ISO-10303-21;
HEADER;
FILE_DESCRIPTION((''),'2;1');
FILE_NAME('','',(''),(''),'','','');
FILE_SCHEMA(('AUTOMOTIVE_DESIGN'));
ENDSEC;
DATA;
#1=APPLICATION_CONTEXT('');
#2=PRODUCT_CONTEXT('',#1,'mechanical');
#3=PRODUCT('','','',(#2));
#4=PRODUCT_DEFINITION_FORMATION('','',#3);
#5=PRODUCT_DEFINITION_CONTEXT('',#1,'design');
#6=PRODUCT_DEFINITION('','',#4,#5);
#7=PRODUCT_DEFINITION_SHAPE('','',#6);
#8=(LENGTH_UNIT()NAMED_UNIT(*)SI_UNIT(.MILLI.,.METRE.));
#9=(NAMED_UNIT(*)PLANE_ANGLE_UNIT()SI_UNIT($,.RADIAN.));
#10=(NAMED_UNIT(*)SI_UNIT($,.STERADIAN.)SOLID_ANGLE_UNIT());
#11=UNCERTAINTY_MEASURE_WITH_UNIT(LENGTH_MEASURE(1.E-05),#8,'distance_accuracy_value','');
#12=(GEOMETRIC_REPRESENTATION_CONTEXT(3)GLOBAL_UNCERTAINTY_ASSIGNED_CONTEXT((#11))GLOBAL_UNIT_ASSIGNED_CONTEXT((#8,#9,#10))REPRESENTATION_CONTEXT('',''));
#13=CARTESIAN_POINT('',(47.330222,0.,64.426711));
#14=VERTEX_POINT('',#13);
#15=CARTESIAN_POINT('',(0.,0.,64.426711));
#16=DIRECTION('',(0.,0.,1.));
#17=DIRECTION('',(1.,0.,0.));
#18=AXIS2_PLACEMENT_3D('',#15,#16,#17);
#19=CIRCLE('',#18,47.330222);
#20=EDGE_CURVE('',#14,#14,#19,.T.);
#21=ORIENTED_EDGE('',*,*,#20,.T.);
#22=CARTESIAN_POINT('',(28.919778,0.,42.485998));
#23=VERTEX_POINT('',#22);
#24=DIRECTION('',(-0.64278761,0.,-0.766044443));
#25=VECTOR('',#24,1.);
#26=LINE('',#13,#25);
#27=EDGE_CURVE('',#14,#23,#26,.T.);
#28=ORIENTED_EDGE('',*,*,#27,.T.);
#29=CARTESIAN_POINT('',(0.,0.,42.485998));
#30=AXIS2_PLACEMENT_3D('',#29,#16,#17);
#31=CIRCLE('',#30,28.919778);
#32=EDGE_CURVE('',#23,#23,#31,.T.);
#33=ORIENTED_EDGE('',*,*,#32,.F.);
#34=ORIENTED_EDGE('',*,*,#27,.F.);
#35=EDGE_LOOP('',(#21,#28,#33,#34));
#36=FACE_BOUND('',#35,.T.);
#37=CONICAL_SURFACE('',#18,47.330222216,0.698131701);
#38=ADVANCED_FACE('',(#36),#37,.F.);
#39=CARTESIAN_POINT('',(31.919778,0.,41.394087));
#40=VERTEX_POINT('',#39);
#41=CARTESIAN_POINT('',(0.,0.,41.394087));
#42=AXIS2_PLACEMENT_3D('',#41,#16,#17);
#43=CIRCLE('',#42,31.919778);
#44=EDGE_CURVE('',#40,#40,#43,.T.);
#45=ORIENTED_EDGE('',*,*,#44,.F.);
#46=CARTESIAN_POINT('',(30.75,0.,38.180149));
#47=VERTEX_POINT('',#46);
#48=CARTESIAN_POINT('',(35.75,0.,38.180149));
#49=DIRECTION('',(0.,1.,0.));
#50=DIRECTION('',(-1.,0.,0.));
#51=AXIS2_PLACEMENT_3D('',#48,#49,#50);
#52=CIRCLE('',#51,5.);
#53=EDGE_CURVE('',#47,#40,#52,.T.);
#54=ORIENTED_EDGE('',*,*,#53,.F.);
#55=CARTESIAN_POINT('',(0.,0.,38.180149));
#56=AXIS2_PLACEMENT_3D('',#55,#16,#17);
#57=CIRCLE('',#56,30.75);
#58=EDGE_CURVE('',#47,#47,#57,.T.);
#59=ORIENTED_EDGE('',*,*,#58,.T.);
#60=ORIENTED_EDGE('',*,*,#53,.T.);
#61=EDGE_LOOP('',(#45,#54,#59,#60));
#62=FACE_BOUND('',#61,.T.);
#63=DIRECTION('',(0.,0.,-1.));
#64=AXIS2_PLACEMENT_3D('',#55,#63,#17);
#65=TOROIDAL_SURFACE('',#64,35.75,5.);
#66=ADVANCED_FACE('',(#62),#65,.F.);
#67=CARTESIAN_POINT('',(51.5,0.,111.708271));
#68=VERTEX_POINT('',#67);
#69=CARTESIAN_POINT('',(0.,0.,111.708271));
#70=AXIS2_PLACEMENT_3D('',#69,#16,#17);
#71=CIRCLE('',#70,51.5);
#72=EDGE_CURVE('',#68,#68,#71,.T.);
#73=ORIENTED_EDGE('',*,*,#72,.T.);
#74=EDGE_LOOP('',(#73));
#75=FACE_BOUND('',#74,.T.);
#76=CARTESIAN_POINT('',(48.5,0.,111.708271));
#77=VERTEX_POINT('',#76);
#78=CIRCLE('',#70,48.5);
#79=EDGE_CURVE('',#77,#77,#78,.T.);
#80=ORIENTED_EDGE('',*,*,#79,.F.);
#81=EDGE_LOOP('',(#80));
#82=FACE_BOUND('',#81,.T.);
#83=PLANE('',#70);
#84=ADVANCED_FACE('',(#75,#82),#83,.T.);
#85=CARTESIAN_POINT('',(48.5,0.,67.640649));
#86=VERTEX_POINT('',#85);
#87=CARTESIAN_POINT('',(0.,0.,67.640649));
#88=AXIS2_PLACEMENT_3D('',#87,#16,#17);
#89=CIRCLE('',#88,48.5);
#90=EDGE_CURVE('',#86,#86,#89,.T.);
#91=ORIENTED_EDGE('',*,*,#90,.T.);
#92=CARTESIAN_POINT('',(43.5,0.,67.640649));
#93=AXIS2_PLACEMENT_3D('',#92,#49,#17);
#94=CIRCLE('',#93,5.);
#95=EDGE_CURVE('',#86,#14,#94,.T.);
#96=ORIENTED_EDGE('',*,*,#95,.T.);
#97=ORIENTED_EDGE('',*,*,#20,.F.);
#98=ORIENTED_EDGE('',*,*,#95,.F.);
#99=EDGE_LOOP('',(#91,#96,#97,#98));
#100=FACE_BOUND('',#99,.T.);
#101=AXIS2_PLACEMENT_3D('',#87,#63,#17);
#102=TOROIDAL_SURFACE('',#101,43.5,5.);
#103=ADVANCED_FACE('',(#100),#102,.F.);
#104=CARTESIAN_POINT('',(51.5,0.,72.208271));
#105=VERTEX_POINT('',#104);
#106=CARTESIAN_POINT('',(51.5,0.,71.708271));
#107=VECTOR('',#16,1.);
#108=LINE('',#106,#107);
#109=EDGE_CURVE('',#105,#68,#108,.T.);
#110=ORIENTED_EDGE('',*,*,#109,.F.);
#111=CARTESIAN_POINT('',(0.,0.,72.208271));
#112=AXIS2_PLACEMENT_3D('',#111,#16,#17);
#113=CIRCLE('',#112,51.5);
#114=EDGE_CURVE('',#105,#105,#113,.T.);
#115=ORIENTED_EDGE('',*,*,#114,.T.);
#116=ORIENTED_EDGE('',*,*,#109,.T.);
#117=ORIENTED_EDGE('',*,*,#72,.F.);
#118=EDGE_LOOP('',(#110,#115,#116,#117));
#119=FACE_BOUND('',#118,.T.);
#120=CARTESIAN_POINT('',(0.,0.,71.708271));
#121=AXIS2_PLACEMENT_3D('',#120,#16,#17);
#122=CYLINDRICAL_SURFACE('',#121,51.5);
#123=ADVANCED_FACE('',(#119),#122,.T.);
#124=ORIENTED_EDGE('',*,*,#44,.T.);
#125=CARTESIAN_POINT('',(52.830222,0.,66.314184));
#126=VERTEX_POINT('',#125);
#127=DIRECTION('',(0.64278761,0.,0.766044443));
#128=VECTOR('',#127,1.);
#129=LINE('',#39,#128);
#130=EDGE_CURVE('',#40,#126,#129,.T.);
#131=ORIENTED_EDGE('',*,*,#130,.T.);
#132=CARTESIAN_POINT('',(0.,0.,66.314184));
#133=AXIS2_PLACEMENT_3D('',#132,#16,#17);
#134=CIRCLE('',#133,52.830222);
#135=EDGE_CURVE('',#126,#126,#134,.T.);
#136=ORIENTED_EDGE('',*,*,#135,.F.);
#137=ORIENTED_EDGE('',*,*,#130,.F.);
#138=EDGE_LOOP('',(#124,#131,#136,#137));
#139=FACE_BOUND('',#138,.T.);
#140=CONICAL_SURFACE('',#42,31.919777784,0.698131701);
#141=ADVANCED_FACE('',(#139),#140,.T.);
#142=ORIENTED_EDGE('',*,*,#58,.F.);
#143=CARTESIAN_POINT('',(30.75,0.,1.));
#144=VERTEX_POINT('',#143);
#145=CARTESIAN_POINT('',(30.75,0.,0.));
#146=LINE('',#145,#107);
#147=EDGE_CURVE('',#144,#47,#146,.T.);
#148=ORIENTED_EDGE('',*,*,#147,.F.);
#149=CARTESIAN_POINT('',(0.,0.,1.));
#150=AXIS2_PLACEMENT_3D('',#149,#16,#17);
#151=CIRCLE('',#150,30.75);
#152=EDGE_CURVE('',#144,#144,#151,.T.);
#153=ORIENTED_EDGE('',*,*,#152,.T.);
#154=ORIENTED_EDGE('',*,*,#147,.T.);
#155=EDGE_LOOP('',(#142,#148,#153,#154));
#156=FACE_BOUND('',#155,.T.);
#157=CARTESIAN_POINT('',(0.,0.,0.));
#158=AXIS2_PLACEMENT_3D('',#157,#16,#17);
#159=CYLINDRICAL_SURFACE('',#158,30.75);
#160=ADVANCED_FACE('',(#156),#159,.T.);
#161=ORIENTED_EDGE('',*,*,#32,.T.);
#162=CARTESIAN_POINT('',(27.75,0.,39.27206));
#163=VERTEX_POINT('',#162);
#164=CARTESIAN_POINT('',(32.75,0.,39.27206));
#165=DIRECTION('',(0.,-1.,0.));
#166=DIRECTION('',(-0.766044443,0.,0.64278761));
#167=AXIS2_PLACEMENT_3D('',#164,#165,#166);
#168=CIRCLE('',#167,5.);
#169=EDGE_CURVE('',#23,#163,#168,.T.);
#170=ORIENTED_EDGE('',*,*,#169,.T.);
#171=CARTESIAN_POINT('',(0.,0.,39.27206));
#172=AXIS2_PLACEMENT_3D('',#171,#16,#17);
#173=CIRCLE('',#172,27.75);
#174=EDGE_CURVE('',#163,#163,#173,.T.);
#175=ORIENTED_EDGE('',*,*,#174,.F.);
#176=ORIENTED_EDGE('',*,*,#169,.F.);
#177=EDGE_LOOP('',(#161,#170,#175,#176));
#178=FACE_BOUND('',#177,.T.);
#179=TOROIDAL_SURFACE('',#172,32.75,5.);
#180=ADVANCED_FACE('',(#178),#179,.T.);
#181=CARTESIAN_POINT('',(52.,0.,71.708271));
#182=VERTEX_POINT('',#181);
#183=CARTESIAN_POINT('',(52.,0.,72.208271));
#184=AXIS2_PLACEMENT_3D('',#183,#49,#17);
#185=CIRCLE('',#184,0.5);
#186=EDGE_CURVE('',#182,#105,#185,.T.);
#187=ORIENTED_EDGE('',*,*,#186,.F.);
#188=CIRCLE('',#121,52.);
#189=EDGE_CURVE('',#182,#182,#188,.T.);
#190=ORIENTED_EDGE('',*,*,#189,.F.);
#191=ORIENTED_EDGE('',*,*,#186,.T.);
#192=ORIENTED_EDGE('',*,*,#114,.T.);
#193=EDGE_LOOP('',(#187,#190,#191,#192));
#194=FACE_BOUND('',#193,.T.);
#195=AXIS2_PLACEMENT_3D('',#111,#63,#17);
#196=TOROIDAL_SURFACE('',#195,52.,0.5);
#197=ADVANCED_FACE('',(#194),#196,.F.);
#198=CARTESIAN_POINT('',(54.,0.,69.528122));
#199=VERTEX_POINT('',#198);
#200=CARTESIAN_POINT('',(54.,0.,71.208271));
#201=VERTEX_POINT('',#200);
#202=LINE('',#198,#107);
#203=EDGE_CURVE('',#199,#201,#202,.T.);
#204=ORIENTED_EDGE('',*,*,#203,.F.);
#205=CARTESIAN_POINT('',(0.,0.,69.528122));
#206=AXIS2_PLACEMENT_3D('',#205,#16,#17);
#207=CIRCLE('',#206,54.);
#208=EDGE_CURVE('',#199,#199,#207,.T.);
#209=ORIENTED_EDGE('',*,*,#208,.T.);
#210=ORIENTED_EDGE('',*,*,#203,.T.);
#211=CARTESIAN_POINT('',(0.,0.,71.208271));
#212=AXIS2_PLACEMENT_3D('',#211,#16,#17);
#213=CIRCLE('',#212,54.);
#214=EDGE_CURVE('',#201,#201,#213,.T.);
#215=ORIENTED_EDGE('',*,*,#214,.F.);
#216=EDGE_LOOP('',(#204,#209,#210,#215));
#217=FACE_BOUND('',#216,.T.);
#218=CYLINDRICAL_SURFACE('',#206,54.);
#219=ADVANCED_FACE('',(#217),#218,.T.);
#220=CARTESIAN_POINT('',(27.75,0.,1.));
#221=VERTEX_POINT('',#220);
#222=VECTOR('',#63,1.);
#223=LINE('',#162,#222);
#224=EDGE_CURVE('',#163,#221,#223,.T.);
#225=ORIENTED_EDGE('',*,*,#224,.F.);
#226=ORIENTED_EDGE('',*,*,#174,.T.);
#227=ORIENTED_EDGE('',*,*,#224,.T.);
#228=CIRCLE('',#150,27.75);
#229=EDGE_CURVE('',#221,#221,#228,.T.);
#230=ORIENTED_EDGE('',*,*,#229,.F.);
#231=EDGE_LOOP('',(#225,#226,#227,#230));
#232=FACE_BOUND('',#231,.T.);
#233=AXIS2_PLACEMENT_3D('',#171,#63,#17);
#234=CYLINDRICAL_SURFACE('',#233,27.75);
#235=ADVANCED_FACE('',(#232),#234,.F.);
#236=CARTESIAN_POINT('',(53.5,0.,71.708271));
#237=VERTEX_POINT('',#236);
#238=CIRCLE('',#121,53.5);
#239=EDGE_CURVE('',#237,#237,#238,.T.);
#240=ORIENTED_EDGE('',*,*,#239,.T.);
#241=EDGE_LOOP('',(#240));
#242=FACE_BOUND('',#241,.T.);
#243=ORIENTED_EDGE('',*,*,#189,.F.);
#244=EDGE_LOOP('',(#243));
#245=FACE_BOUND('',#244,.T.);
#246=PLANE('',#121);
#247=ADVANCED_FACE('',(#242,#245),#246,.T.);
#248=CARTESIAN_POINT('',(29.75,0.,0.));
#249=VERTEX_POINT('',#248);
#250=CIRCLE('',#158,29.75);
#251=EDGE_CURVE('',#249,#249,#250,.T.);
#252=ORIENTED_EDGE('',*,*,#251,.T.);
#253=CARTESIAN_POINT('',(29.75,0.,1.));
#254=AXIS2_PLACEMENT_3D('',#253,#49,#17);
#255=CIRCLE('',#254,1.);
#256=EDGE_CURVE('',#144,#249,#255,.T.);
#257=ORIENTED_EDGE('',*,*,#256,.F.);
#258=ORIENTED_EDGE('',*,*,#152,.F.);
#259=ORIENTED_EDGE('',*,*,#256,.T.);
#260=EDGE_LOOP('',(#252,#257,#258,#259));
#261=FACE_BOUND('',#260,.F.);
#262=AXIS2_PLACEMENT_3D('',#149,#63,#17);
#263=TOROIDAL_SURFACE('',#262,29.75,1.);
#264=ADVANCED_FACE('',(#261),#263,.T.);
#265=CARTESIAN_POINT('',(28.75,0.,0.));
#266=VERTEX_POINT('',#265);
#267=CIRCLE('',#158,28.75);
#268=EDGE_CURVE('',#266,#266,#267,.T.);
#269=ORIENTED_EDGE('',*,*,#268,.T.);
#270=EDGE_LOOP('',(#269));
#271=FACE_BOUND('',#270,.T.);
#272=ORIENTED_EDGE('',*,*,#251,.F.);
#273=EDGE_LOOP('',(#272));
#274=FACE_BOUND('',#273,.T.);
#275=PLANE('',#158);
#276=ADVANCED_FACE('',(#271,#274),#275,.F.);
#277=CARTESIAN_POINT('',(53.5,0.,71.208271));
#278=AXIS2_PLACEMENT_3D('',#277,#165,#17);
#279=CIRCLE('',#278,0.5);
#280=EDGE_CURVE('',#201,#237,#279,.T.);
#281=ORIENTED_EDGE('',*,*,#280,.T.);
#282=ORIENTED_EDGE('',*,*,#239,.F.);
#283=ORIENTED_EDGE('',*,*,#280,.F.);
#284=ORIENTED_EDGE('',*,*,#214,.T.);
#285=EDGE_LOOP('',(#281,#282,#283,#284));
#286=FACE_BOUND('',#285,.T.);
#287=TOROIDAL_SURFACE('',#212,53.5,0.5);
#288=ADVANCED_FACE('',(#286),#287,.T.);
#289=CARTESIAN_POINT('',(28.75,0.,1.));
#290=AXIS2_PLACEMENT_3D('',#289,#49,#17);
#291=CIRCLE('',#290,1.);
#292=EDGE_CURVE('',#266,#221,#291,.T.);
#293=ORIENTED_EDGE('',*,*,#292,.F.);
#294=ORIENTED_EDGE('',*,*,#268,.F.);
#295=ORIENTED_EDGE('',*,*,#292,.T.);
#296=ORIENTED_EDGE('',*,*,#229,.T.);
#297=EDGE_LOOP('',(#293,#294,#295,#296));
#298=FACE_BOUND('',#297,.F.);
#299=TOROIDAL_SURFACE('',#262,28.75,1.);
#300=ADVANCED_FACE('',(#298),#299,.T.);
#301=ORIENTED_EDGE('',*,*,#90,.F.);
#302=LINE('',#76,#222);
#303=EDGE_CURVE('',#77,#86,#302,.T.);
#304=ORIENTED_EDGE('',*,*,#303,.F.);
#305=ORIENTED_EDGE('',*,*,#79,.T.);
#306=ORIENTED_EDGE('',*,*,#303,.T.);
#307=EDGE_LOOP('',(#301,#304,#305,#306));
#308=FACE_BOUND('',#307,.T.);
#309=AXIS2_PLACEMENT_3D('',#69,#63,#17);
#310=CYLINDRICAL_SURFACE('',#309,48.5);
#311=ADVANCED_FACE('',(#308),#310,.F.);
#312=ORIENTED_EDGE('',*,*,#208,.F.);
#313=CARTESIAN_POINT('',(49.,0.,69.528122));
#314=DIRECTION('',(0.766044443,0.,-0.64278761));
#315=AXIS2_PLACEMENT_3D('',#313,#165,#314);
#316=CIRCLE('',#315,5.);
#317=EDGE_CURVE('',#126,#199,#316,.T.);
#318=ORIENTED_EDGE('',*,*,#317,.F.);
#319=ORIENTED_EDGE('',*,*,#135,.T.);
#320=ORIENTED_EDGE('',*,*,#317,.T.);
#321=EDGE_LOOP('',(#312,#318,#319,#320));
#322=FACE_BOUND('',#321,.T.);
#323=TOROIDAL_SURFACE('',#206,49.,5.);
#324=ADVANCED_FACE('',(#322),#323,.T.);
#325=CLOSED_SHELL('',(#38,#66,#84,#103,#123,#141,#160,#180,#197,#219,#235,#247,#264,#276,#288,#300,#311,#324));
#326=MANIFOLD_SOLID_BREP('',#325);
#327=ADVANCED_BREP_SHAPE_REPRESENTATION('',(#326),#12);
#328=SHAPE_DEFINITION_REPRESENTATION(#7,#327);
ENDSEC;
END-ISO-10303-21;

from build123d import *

# Parameters (mm, degrees)
F2_R = 0.5
F3_R = 1


# Not quite as in the source:
# - a feature names something its author has since deleted; it is built from what else it names


with BuildPart() as f1:
    # F0 (on Front) → F1 (revolve)
    with BuildSketch(Plane.XZ):
        with BuildLine():
            Line((27.75, 0), (30.75, 0))
            Line((30.75, 0), (30.75, 38.1801488287))
            ThreePointArc((30.75, 38.1801488287), (31.0515368961, 39.8902495453), (31.9197777844, 41.3940868771))
            Line((31.9197777844, 41.3940868771), (52.8302222156, 66.3141841507))
            ThreePointArc((52.8302222156, 66.3141841507), (53.6984631039, 67.8180214825), (54, 69.5281221991))
            Line((54, 69.5281221991), (54, 71.7082710278))
            Line((54, 71.7082710278), (51.5, 71.7082710278))
            Line((51.5, 71.7082710278), (51.5, 111.7082710278))
            Line((51.5, 111.7082710278), (48.5, 111.7082710278))
            Line((48.5, 111.7082710278), (48.5, 67.6406489205))
            ThreePointArc((48.5, 67.6406489205), (48.1984631039, 65.9305482038), (47.3302222156, 64.426710872))
            Line((47.3302222156, 64.426710872), (28.9197777844, 42.4859975799))
            ThreePointArc((28.9197777844, 42.4859975799), (28.0515368961, 40.9821602481), (27.75, 39.2720595315))
            Line((27.75, 39.2720595315), (27.75, 0))
        make_face()
    revolve(axis=Axis((0, 0, 46.6845482588), (0, 0, 1)))

    # F2
    f2_edges = [f1.edges().sort_by_distance(p)[0] for p in [
        (-54, 0, 71.708271),
        (-51.5, 0, 71.708271),
    ]]
    fillet(f2_edges, radius=F2_R)

    # F3
    f3_edges = [f1.edges().sort_by_distance(p)[0] for p in [
        (-30.75, 0, 0),
        (-27.75, 0, 0),
    ]]
    fillet(f3_edges, radius=F3_R)


solid = f1.part
